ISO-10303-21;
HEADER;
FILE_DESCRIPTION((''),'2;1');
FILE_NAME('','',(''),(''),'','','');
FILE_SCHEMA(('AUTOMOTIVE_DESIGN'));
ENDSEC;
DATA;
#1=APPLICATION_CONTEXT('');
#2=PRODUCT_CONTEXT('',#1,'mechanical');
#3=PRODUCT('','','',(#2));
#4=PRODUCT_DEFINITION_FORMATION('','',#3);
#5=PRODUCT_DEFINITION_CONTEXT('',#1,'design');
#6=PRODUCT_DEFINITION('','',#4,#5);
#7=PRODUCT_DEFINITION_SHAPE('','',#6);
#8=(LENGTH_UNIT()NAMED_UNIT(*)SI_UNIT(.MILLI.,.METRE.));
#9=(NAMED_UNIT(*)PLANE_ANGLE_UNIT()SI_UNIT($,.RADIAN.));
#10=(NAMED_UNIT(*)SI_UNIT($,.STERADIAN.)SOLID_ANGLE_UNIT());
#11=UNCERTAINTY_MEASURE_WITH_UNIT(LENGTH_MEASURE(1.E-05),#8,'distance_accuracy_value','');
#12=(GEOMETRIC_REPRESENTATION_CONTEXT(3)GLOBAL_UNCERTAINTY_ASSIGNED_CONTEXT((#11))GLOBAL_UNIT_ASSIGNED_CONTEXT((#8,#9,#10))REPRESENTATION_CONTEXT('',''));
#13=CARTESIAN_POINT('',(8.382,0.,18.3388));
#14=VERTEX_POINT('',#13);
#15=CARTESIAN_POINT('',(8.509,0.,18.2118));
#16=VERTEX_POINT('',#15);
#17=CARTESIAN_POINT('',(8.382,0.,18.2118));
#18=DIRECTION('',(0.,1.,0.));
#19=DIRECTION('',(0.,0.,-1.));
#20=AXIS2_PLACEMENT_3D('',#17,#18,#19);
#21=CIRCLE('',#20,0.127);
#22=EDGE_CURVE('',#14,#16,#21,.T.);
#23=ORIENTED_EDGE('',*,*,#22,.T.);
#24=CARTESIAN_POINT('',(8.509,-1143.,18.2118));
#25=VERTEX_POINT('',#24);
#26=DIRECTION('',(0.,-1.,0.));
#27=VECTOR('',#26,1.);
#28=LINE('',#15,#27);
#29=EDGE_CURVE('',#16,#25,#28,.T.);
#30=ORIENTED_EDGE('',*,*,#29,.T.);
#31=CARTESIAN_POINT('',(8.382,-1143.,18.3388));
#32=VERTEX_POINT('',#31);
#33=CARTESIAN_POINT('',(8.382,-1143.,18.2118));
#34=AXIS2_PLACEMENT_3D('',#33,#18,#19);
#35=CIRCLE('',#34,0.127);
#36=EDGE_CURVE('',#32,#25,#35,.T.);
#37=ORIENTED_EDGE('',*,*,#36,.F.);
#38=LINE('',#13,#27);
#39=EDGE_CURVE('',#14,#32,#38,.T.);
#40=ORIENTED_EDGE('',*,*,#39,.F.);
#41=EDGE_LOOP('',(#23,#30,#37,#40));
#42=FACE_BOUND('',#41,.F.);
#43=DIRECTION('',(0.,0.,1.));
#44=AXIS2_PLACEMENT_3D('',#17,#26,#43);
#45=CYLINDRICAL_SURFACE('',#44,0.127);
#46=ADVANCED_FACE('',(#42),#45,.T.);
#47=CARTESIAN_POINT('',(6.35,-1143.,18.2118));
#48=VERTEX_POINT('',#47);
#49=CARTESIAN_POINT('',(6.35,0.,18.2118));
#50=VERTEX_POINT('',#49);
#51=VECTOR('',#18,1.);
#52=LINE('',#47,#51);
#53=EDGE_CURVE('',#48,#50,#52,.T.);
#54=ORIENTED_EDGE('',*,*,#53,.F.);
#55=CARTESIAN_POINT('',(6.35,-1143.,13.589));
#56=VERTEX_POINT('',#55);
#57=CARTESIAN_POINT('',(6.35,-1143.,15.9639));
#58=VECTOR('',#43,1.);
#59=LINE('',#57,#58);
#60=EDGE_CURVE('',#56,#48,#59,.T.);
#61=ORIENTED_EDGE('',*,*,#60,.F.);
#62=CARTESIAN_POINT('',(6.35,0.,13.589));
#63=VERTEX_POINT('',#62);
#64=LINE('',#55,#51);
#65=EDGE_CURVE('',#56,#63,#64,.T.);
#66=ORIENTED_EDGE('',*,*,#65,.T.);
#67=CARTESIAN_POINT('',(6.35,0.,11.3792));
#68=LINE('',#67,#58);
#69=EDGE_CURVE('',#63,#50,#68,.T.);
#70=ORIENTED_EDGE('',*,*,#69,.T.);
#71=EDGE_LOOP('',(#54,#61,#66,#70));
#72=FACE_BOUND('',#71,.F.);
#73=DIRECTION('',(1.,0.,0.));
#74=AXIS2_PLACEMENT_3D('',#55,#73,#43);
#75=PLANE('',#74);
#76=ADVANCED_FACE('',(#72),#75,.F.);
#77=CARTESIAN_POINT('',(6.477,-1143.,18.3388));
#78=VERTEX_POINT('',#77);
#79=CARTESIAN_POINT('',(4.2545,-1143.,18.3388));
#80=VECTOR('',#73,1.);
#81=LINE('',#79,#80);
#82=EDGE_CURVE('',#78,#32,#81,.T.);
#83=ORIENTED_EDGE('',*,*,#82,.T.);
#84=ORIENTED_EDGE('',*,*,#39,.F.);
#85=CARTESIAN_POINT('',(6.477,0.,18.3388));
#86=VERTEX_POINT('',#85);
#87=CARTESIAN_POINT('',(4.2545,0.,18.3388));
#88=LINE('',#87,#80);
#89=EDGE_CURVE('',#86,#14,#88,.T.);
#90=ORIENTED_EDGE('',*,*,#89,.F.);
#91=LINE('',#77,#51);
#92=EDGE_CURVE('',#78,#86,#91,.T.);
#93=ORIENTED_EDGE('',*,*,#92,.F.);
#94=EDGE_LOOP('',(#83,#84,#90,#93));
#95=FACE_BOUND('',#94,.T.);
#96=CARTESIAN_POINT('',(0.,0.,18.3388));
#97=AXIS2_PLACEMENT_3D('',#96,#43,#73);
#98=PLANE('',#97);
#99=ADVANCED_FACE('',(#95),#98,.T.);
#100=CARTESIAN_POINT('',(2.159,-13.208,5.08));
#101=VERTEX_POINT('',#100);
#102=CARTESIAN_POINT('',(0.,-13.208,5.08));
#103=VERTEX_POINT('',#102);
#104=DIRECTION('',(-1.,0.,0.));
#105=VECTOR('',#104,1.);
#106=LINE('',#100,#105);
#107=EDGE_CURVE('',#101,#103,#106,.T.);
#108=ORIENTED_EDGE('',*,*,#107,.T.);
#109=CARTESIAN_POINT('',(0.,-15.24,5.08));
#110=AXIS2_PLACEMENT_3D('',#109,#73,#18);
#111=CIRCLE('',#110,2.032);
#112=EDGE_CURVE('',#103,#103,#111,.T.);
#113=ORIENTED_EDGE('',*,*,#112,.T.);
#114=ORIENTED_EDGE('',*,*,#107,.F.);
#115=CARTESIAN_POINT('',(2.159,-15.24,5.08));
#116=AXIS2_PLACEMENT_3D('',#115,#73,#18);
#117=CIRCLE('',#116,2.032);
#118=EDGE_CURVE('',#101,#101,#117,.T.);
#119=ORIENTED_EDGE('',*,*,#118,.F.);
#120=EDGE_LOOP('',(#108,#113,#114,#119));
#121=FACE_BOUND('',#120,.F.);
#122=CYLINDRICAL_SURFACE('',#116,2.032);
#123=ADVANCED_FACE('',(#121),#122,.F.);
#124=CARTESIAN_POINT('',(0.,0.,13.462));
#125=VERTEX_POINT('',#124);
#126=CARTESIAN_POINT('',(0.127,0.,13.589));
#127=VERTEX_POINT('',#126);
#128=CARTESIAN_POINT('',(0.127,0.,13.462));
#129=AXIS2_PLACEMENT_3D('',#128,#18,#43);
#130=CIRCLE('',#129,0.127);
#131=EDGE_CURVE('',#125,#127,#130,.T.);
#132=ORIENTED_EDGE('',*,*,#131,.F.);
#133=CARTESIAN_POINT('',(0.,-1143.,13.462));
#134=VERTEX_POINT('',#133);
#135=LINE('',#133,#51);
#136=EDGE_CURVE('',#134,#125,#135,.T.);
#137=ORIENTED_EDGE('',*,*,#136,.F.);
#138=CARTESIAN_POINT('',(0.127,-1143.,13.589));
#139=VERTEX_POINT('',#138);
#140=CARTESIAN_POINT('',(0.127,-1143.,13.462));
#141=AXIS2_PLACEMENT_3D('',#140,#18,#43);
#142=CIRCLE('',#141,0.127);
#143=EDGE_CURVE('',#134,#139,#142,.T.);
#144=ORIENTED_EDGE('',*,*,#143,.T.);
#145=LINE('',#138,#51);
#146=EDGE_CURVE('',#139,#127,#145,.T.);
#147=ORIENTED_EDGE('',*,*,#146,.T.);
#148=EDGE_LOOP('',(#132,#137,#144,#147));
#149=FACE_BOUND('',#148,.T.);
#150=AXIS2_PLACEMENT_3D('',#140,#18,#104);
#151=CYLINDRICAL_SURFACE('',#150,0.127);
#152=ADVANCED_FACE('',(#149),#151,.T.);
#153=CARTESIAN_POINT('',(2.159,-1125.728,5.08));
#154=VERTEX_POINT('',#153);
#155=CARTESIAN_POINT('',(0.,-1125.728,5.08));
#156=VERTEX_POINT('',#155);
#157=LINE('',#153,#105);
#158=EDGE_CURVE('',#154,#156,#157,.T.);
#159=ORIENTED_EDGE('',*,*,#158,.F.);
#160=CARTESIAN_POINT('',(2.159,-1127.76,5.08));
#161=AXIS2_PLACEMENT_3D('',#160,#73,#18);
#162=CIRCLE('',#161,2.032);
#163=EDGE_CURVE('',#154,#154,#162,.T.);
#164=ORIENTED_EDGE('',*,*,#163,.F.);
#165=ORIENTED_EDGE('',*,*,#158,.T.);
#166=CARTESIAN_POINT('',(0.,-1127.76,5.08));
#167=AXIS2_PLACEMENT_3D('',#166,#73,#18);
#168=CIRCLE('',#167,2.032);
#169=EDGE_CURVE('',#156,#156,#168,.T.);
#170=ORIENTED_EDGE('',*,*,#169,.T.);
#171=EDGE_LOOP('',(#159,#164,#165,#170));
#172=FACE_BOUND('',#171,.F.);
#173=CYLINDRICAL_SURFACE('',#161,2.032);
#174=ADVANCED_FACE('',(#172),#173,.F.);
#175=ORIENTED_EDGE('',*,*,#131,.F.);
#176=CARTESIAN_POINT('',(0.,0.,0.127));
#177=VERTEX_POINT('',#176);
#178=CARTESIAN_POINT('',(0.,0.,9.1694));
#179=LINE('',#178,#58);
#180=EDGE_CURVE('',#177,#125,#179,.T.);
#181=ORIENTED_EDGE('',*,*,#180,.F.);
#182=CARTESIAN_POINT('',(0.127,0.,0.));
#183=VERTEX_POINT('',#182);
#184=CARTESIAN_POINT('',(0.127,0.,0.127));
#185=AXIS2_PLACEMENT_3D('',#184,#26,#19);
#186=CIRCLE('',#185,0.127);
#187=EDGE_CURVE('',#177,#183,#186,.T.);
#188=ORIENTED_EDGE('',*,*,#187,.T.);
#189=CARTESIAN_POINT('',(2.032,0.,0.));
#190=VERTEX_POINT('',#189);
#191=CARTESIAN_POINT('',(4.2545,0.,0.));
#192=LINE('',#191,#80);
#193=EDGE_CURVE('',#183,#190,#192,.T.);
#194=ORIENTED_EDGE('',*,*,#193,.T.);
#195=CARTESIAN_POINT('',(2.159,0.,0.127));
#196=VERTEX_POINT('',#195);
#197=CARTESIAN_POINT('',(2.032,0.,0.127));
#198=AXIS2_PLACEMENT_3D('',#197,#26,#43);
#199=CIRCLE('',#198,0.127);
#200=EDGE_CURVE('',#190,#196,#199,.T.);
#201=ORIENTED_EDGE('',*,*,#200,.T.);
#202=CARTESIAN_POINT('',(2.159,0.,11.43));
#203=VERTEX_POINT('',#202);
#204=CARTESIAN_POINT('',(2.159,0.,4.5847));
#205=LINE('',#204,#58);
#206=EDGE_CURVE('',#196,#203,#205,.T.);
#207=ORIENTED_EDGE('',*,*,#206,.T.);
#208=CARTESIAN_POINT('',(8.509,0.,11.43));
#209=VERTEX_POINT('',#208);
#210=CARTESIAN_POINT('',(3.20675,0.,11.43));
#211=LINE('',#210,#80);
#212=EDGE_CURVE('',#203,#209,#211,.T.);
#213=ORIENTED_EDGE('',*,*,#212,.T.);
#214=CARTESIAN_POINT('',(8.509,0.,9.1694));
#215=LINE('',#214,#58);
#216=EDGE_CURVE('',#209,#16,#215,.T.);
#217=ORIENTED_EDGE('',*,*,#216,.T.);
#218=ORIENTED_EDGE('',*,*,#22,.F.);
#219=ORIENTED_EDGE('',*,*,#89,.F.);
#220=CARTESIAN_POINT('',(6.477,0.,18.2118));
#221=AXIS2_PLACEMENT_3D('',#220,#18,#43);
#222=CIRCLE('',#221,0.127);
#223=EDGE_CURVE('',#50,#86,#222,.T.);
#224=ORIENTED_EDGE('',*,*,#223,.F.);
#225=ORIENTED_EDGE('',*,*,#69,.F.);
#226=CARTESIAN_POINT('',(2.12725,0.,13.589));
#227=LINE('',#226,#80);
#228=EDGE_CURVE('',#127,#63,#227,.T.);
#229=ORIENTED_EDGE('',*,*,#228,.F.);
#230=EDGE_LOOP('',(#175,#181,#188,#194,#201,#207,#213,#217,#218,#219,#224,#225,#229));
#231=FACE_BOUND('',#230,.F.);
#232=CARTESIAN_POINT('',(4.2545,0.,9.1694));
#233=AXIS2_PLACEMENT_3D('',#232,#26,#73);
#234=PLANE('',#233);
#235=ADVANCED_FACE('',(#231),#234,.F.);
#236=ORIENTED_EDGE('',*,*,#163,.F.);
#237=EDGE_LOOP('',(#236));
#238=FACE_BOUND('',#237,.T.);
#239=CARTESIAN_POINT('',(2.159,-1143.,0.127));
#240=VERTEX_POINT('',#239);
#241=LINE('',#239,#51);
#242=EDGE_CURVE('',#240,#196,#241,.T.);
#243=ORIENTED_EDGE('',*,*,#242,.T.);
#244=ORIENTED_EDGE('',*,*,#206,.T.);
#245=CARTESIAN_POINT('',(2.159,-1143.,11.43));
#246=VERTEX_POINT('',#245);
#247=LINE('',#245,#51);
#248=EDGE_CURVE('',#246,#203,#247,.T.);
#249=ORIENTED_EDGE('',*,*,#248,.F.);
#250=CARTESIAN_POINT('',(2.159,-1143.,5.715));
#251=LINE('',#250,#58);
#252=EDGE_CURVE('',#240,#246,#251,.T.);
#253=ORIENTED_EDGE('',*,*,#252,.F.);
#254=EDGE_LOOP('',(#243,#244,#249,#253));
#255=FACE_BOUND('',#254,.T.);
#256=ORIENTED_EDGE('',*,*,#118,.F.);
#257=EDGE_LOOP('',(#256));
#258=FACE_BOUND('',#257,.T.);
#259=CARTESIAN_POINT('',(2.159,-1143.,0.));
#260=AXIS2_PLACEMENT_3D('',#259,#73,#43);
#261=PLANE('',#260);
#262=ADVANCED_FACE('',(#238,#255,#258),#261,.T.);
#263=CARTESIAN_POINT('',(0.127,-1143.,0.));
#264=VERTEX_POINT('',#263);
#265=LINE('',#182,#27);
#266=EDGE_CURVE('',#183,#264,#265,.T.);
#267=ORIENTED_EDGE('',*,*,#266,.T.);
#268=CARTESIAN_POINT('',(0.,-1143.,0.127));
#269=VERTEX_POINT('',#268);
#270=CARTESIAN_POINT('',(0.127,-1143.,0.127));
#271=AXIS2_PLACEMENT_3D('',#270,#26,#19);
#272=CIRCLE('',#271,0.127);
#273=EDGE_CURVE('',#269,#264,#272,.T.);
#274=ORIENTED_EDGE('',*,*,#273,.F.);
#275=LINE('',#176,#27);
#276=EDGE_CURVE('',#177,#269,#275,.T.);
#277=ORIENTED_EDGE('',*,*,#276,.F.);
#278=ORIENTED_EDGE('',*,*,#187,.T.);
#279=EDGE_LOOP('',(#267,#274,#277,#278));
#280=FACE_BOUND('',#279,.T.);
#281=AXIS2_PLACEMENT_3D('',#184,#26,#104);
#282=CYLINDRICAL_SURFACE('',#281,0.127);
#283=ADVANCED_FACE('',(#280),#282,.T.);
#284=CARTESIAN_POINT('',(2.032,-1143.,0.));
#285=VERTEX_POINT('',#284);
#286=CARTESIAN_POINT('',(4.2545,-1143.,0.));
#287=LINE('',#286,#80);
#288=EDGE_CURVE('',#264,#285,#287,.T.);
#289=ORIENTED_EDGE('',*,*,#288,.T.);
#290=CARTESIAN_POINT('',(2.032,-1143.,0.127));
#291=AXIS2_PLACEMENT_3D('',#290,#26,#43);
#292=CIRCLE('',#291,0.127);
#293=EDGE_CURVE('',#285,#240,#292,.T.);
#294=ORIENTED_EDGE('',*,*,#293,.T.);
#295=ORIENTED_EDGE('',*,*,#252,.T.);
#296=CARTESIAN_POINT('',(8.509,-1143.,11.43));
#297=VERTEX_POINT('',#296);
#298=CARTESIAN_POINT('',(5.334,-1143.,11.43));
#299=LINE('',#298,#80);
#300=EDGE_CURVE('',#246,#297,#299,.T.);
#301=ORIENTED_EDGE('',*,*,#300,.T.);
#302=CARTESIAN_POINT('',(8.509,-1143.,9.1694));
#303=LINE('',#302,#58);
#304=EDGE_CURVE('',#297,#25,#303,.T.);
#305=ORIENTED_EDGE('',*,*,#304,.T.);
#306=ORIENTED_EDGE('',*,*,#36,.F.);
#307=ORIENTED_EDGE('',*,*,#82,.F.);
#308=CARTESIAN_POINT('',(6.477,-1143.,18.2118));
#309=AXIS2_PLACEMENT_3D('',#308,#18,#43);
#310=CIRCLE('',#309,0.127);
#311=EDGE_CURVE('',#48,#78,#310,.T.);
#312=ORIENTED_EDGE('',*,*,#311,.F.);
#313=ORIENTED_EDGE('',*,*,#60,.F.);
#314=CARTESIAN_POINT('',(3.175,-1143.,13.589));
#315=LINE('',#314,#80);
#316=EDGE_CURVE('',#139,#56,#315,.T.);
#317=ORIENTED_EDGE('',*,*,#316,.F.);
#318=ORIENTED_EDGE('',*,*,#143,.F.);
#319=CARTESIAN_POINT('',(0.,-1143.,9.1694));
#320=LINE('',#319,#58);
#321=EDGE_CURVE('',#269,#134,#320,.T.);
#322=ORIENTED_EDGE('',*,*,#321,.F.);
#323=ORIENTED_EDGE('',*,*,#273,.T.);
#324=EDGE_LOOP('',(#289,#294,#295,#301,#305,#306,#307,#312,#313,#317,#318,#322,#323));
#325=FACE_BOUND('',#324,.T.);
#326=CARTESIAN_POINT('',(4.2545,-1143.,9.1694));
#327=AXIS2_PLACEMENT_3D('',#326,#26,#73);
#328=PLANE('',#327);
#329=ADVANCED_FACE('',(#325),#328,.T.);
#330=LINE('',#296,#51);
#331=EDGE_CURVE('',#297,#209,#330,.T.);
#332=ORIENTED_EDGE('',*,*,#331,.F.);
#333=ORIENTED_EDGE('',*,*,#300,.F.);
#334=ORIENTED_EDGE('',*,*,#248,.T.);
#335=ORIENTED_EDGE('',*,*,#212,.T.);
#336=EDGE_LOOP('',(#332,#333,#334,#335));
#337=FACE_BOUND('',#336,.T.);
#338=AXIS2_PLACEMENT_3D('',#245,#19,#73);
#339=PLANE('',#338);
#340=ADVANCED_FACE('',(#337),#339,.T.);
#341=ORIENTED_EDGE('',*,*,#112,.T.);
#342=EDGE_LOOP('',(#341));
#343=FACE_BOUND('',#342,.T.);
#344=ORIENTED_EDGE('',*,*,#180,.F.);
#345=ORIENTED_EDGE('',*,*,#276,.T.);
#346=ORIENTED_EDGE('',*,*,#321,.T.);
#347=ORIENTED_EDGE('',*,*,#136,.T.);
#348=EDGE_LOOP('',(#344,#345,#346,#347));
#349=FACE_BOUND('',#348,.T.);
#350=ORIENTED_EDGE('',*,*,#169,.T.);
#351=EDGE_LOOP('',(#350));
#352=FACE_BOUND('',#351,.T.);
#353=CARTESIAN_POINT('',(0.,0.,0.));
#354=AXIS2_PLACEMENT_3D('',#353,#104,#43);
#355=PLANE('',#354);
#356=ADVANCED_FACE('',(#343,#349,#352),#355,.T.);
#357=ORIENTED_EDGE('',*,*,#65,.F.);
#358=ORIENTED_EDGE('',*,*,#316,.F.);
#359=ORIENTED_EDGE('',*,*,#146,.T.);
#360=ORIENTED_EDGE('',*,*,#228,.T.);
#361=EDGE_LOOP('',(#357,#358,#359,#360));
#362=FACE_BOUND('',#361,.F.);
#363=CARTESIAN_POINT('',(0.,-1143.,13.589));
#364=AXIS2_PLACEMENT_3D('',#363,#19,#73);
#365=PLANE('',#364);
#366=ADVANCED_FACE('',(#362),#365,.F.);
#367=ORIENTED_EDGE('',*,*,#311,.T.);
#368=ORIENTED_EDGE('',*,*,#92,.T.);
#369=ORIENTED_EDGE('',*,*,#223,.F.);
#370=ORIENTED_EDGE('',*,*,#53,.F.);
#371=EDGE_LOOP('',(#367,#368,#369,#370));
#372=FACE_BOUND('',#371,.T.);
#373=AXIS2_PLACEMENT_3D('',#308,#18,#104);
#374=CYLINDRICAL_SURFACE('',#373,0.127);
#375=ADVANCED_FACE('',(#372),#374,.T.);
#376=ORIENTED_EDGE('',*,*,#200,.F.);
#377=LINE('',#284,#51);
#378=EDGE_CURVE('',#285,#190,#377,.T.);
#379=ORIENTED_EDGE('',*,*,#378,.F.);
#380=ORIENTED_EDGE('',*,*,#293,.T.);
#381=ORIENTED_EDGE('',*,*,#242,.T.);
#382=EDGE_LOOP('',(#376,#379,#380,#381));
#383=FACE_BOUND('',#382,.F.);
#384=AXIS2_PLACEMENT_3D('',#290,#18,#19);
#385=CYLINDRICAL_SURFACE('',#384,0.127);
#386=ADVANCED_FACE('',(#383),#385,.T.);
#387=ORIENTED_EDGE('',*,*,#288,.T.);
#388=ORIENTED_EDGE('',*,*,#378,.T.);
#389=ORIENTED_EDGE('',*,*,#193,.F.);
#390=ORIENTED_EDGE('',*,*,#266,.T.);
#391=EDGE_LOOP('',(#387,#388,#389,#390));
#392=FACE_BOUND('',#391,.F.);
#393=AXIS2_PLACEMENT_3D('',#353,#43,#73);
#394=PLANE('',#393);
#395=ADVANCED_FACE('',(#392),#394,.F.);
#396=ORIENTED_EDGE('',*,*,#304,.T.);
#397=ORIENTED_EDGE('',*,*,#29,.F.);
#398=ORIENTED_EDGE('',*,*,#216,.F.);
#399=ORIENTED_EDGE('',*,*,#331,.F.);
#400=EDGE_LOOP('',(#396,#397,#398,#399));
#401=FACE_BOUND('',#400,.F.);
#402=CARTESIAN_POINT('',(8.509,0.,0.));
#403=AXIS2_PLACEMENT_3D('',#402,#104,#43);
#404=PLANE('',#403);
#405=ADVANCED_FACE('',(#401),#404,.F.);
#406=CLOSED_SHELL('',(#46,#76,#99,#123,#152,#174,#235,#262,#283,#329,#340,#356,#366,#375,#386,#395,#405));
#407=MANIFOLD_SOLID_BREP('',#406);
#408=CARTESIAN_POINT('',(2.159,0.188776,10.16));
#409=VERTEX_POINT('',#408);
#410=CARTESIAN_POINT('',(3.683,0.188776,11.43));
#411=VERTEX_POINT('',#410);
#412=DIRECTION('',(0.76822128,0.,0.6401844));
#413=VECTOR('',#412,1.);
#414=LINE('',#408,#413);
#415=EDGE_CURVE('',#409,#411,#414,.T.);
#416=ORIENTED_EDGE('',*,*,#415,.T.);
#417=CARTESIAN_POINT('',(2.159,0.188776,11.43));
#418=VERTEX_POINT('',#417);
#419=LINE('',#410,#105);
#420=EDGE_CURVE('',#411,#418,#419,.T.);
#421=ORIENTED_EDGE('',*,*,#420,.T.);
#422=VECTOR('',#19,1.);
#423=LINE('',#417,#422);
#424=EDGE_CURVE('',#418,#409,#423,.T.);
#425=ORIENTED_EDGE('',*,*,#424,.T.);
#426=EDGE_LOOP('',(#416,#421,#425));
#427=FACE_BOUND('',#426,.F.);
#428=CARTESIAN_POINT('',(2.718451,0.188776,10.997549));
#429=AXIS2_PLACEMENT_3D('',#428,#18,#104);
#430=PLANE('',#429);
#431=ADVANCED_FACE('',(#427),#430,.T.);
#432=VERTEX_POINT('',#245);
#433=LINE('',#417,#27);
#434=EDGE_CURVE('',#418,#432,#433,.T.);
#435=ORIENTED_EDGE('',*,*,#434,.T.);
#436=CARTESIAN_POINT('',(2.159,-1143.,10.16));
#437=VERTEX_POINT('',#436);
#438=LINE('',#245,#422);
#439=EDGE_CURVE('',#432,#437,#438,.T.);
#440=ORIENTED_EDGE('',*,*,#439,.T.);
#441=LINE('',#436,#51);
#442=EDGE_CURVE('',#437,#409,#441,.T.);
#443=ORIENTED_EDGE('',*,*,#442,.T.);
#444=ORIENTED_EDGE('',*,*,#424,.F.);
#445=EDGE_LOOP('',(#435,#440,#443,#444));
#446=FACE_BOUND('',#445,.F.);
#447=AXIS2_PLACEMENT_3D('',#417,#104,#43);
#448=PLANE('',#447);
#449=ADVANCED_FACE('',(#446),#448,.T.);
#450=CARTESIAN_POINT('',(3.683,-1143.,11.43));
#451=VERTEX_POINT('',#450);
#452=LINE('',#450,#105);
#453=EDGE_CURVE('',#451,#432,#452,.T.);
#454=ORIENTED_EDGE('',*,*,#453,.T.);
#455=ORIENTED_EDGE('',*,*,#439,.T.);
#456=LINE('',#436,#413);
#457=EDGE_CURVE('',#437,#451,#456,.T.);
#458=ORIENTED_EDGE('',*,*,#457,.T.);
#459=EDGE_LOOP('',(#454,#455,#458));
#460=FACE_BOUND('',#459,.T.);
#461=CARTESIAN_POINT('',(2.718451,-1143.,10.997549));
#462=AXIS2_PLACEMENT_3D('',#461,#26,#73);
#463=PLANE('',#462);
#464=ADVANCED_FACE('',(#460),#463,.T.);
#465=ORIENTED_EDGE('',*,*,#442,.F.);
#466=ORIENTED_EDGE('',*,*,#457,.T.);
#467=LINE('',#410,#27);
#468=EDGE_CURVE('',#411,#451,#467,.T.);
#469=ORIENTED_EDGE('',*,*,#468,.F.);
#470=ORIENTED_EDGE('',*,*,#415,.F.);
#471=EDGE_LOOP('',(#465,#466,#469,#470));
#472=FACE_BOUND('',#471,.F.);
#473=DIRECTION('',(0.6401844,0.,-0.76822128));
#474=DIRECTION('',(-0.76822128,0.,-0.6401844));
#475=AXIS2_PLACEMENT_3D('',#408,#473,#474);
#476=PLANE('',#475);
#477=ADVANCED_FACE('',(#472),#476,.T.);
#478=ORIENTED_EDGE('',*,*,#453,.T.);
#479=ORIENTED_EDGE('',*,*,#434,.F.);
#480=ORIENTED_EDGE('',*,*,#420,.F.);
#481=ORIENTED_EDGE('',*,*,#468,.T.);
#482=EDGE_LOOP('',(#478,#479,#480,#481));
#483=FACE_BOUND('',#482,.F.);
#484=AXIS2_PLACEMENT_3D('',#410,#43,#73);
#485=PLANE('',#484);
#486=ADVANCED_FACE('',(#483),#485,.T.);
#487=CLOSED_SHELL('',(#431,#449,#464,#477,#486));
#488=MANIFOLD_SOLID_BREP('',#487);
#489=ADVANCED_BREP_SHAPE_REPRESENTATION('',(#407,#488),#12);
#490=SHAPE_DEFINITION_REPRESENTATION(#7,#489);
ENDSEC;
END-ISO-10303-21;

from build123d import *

# Parameters (mm, degrees)
F0_W     = 8.509
F0_H     = 18.3388
F1_DEPTH = 1143
F2_W     = 6.35
F2_H     = 4.7498
F2_H_2   = 11.43
F3_DEPTH = 1143.001
F4_R     = 0.127
F6_DEPTH = 1143.001
F7_R     = 2.032
F8_DEPTH = 2.159


# Not quite as in the source:
# - a pattern or mirror of a feature is missing from the dataset's text; its kind, count and spacing are read off the source's solid


with BuildPart() as f1:
    # F0 (on Front) → F1 (new body)
    with BuildSketch(Plane.XZ):
        with Locations((4.2545, 9.1694)):
            Rectangle(F0_W, F0_H)
    extrude(amount=F1_DEPTH)

    # F2 (on face) → F3 (cut, through all)
    with BuildSketch(Plane.XZ.offset(1143)):
        with Locations((3.175, 15.9639)):
            Rectangle(F2_W, F2_H)
        with Locations((5.334, 5.715)):
            Rectangle(F2_W, F2_H_2)
    extrude(amount=-F3_DEPTH, mode=Mode.SUBTRACT)

    # F4
    f4_edges = [f1.edges().sort_by_distance(p)[0] for p in [
        (6.35, -571.5, 18.3388),
        (8.509, -571.5, 18.3388),
        (2.159, -571.5, 0),
        (0, -571.5, 0),
        (0, -571.5, 13.589),
    ]]
    fillet(f4_edges, radius=F4_R)

    # F7 (on face) → F8 (cut, through all)
    with BuildSketch(Plane.YZ.offset(2.159)):
        with Locations((-1127.76, 5.08)):
            Circle(F7_R)
        with Locations((-15.24, 5.08)):
            Circle(F7_R)
    extrude(amount=-F8_DEPTH, mode=Mode.SUBTRACT)


with BuildPart() as f6:
    # F5 (on face) → F6 (new body, through all)
    with BuildSketch(Plane.XZ.offset(1143)):
        Polygon((2.159, 10.16), (3.683, 11.43), (2.159, 11.43), align=None)
    extrude(amount=-F6_DEPTH)

    # F6_copies: F6 across plane


with BuildPart() as f6_1:
    add(f6.part)
    add(f6.part.mirror(Plane.ZX.offset(-571.405612)))


solid = Compound([f1.part, f6_1.part])
